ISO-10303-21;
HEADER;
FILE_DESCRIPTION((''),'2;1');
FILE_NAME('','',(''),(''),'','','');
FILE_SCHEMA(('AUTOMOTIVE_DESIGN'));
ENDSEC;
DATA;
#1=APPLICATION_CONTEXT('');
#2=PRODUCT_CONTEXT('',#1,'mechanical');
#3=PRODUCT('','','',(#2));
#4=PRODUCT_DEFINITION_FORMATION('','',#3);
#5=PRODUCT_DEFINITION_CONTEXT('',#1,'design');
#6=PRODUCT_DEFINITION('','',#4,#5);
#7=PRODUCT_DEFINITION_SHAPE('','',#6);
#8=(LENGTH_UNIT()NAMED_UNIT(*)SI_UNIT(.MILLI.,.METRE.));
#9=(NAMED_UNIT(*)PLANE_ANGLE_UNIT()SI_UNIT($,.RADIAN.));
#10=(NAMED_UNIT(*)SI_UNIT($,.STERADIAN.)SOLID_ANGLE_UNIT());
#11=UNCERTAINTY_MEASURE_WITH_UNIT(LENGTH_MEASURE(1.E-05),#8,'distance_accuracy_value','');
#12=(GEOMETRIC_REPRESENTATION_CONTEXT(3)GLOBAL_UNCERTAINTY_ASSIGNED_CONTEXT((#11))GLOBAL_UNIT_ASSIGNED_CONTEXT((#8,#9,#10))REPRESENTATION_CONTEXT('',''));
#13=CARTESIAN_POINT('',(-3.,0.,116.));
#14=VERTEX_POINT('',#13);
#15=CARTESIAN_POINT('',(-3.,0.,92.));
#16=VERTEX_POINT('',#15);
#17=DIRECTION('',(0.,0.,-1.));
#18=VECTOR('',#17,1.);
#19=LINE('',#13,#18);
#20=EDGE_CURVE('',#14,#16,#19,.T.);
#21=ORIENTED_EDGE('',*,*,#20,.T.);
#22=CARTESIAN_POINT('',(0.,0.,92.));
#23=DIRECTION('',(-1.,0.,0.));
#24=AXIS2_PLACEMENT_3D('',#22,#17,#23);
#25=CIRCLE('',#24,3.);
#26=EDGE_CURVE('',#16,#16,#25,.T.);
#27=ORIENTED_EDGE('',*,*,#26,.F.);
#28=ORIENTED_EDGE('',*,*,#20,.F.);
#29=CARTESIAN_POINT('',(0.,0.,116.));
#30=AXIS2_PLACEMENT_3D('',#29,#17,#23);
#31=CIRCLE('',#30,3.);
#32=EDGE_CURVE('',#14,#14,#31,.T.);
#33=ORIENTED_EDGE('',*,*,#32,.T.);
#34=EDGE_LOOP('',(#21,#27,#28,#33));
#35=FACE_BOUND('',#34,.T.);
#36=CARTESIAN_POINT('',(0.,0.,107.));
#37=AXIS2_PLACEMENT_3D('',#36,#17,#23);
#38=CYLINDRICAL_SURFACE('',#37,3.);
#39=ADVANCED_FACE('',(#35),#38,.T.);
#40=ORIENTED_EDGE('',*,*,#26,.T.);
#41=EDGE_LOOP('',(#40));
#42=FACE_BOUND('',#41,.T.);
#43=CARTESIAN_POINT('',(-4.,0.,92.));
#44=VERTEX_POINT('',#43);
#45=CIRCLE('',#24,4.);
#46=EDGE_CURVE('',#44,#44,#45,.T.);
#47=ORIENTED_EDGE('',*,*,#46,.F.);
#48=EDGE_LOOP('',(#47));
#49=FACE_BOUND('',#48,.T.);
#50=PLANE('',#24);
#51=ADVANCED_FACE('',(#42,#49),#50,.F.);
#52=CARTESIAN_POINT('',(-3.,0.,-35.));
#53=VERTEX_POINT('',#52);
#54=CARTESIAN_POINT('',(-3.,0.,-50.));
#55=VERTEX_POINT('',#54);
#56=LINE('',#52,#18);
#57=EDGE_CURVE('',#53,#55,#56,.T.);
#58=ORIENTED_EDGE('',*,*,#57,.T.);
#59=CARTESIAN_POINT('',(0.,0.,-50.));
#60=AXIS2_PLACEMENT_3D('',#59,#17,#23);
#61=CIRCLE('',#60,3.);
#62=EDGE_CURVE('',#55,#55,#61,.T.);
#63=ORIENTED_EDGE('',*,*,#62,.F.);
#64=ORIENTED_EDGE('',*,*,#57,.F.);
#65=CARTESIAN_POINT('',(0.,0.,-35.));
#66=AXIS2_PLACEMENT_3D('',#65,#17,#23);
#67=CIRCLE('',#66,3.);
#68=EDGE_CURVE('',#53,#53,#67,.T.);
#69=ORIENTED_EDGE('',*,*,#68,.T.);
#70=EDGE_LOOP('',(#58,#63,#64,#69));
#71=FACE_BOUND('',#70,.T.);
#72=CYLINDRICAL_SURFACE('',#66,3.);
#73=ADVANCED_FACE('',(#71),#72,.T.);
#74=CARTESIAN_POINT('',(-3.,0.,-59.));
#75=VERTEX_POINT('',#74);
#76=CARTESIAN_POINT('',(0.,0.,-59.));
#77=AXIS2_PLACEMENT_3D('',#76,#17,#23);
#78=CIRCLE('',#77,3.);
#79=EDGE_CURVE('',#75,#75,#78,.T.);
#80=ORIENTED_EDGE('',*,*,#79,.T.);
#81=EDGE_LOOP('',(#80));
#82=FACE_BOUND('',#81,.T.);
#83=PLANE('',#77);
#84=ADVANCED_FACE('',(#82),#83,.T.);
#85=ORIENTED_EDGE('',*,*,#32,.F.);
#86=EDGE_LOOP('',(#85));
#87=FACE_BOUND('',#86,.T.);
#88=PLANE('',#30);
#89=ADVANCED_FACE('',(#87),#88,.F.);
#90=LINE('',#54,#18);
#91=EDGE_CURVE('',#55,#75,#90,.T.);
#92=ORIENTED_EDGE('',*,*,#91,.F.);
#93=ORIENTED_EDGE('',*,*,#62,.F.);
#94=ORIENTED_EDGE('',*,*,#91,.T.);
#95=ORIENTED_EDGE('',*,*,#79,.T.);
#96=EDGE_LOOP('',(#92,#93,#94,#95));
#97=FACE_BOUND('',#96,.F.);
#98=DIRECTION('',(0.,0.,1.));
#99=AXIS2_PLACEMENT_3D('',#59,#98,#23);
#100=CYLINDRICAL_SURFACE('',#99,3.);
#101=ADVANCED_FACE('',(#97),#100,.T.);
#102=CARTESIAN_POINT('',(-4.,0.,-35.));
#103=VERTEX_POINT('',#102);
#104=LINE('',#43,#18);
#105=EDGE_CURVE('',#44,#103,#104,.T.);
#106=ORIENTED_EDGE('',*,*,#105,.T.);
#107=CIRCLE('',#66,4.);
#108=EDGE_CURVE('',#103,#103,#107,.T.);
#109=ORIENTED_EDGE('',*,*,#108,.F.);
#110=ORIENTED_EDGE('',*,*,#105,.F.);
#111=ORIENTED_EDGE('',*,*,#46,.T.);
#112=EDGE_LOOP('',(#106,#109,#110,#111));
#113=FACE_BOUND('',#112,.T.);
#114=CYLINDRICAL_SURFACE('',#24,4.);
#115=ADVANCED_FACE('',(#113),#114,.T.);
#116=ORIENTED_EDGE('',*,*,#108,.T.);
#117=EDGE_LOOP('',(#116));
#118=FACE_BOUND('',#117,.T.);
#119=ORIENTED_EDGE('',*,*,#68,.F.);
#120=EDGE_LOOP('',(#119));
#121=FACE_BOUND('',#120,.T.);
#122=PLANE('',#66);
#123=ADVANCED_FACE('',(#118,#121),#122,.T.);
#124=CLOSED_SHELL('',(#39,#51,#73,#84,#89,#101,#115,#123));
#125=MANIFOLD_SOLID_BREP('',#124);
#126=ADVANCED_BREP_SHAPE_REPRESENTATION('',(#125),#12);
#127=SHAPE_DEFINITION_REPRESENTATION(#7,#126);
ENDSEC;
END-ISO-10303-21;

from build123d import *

# Parameters (mm, degrees)
F2_DEPTH = 9
F3_DEPTH = 9


with BuildPart() as f1:
    # F0 (on Front) → F1 (revolve)
    with BuildSketch(Plane.XZ):
        Polygon((0, -50), (0, 107), (-3, 107), (-3, 92), (-4, 92), (-4, -35), (-3, -35), (-3, -50), align=None)
    revolve(axis=Axis((0, 0, 0), (0, 0, -1)))

    # F2 (add): a face of the model
    f2_faces = [f1.faces().sort_by_distance(p)[0] for p in [
        (0, 0, 107),
    ]]
    extrude(f2_faces, amount=F2_DEPTH)

    # F3 (add): a face of the model
    f3_faces = [f1.faces().sort_by_distance(p)[0] for p in [
        (0, 0, -50),
    ]]
    extrude(f3_faces, amount=F3_DEPTH)


solid = f1.part
